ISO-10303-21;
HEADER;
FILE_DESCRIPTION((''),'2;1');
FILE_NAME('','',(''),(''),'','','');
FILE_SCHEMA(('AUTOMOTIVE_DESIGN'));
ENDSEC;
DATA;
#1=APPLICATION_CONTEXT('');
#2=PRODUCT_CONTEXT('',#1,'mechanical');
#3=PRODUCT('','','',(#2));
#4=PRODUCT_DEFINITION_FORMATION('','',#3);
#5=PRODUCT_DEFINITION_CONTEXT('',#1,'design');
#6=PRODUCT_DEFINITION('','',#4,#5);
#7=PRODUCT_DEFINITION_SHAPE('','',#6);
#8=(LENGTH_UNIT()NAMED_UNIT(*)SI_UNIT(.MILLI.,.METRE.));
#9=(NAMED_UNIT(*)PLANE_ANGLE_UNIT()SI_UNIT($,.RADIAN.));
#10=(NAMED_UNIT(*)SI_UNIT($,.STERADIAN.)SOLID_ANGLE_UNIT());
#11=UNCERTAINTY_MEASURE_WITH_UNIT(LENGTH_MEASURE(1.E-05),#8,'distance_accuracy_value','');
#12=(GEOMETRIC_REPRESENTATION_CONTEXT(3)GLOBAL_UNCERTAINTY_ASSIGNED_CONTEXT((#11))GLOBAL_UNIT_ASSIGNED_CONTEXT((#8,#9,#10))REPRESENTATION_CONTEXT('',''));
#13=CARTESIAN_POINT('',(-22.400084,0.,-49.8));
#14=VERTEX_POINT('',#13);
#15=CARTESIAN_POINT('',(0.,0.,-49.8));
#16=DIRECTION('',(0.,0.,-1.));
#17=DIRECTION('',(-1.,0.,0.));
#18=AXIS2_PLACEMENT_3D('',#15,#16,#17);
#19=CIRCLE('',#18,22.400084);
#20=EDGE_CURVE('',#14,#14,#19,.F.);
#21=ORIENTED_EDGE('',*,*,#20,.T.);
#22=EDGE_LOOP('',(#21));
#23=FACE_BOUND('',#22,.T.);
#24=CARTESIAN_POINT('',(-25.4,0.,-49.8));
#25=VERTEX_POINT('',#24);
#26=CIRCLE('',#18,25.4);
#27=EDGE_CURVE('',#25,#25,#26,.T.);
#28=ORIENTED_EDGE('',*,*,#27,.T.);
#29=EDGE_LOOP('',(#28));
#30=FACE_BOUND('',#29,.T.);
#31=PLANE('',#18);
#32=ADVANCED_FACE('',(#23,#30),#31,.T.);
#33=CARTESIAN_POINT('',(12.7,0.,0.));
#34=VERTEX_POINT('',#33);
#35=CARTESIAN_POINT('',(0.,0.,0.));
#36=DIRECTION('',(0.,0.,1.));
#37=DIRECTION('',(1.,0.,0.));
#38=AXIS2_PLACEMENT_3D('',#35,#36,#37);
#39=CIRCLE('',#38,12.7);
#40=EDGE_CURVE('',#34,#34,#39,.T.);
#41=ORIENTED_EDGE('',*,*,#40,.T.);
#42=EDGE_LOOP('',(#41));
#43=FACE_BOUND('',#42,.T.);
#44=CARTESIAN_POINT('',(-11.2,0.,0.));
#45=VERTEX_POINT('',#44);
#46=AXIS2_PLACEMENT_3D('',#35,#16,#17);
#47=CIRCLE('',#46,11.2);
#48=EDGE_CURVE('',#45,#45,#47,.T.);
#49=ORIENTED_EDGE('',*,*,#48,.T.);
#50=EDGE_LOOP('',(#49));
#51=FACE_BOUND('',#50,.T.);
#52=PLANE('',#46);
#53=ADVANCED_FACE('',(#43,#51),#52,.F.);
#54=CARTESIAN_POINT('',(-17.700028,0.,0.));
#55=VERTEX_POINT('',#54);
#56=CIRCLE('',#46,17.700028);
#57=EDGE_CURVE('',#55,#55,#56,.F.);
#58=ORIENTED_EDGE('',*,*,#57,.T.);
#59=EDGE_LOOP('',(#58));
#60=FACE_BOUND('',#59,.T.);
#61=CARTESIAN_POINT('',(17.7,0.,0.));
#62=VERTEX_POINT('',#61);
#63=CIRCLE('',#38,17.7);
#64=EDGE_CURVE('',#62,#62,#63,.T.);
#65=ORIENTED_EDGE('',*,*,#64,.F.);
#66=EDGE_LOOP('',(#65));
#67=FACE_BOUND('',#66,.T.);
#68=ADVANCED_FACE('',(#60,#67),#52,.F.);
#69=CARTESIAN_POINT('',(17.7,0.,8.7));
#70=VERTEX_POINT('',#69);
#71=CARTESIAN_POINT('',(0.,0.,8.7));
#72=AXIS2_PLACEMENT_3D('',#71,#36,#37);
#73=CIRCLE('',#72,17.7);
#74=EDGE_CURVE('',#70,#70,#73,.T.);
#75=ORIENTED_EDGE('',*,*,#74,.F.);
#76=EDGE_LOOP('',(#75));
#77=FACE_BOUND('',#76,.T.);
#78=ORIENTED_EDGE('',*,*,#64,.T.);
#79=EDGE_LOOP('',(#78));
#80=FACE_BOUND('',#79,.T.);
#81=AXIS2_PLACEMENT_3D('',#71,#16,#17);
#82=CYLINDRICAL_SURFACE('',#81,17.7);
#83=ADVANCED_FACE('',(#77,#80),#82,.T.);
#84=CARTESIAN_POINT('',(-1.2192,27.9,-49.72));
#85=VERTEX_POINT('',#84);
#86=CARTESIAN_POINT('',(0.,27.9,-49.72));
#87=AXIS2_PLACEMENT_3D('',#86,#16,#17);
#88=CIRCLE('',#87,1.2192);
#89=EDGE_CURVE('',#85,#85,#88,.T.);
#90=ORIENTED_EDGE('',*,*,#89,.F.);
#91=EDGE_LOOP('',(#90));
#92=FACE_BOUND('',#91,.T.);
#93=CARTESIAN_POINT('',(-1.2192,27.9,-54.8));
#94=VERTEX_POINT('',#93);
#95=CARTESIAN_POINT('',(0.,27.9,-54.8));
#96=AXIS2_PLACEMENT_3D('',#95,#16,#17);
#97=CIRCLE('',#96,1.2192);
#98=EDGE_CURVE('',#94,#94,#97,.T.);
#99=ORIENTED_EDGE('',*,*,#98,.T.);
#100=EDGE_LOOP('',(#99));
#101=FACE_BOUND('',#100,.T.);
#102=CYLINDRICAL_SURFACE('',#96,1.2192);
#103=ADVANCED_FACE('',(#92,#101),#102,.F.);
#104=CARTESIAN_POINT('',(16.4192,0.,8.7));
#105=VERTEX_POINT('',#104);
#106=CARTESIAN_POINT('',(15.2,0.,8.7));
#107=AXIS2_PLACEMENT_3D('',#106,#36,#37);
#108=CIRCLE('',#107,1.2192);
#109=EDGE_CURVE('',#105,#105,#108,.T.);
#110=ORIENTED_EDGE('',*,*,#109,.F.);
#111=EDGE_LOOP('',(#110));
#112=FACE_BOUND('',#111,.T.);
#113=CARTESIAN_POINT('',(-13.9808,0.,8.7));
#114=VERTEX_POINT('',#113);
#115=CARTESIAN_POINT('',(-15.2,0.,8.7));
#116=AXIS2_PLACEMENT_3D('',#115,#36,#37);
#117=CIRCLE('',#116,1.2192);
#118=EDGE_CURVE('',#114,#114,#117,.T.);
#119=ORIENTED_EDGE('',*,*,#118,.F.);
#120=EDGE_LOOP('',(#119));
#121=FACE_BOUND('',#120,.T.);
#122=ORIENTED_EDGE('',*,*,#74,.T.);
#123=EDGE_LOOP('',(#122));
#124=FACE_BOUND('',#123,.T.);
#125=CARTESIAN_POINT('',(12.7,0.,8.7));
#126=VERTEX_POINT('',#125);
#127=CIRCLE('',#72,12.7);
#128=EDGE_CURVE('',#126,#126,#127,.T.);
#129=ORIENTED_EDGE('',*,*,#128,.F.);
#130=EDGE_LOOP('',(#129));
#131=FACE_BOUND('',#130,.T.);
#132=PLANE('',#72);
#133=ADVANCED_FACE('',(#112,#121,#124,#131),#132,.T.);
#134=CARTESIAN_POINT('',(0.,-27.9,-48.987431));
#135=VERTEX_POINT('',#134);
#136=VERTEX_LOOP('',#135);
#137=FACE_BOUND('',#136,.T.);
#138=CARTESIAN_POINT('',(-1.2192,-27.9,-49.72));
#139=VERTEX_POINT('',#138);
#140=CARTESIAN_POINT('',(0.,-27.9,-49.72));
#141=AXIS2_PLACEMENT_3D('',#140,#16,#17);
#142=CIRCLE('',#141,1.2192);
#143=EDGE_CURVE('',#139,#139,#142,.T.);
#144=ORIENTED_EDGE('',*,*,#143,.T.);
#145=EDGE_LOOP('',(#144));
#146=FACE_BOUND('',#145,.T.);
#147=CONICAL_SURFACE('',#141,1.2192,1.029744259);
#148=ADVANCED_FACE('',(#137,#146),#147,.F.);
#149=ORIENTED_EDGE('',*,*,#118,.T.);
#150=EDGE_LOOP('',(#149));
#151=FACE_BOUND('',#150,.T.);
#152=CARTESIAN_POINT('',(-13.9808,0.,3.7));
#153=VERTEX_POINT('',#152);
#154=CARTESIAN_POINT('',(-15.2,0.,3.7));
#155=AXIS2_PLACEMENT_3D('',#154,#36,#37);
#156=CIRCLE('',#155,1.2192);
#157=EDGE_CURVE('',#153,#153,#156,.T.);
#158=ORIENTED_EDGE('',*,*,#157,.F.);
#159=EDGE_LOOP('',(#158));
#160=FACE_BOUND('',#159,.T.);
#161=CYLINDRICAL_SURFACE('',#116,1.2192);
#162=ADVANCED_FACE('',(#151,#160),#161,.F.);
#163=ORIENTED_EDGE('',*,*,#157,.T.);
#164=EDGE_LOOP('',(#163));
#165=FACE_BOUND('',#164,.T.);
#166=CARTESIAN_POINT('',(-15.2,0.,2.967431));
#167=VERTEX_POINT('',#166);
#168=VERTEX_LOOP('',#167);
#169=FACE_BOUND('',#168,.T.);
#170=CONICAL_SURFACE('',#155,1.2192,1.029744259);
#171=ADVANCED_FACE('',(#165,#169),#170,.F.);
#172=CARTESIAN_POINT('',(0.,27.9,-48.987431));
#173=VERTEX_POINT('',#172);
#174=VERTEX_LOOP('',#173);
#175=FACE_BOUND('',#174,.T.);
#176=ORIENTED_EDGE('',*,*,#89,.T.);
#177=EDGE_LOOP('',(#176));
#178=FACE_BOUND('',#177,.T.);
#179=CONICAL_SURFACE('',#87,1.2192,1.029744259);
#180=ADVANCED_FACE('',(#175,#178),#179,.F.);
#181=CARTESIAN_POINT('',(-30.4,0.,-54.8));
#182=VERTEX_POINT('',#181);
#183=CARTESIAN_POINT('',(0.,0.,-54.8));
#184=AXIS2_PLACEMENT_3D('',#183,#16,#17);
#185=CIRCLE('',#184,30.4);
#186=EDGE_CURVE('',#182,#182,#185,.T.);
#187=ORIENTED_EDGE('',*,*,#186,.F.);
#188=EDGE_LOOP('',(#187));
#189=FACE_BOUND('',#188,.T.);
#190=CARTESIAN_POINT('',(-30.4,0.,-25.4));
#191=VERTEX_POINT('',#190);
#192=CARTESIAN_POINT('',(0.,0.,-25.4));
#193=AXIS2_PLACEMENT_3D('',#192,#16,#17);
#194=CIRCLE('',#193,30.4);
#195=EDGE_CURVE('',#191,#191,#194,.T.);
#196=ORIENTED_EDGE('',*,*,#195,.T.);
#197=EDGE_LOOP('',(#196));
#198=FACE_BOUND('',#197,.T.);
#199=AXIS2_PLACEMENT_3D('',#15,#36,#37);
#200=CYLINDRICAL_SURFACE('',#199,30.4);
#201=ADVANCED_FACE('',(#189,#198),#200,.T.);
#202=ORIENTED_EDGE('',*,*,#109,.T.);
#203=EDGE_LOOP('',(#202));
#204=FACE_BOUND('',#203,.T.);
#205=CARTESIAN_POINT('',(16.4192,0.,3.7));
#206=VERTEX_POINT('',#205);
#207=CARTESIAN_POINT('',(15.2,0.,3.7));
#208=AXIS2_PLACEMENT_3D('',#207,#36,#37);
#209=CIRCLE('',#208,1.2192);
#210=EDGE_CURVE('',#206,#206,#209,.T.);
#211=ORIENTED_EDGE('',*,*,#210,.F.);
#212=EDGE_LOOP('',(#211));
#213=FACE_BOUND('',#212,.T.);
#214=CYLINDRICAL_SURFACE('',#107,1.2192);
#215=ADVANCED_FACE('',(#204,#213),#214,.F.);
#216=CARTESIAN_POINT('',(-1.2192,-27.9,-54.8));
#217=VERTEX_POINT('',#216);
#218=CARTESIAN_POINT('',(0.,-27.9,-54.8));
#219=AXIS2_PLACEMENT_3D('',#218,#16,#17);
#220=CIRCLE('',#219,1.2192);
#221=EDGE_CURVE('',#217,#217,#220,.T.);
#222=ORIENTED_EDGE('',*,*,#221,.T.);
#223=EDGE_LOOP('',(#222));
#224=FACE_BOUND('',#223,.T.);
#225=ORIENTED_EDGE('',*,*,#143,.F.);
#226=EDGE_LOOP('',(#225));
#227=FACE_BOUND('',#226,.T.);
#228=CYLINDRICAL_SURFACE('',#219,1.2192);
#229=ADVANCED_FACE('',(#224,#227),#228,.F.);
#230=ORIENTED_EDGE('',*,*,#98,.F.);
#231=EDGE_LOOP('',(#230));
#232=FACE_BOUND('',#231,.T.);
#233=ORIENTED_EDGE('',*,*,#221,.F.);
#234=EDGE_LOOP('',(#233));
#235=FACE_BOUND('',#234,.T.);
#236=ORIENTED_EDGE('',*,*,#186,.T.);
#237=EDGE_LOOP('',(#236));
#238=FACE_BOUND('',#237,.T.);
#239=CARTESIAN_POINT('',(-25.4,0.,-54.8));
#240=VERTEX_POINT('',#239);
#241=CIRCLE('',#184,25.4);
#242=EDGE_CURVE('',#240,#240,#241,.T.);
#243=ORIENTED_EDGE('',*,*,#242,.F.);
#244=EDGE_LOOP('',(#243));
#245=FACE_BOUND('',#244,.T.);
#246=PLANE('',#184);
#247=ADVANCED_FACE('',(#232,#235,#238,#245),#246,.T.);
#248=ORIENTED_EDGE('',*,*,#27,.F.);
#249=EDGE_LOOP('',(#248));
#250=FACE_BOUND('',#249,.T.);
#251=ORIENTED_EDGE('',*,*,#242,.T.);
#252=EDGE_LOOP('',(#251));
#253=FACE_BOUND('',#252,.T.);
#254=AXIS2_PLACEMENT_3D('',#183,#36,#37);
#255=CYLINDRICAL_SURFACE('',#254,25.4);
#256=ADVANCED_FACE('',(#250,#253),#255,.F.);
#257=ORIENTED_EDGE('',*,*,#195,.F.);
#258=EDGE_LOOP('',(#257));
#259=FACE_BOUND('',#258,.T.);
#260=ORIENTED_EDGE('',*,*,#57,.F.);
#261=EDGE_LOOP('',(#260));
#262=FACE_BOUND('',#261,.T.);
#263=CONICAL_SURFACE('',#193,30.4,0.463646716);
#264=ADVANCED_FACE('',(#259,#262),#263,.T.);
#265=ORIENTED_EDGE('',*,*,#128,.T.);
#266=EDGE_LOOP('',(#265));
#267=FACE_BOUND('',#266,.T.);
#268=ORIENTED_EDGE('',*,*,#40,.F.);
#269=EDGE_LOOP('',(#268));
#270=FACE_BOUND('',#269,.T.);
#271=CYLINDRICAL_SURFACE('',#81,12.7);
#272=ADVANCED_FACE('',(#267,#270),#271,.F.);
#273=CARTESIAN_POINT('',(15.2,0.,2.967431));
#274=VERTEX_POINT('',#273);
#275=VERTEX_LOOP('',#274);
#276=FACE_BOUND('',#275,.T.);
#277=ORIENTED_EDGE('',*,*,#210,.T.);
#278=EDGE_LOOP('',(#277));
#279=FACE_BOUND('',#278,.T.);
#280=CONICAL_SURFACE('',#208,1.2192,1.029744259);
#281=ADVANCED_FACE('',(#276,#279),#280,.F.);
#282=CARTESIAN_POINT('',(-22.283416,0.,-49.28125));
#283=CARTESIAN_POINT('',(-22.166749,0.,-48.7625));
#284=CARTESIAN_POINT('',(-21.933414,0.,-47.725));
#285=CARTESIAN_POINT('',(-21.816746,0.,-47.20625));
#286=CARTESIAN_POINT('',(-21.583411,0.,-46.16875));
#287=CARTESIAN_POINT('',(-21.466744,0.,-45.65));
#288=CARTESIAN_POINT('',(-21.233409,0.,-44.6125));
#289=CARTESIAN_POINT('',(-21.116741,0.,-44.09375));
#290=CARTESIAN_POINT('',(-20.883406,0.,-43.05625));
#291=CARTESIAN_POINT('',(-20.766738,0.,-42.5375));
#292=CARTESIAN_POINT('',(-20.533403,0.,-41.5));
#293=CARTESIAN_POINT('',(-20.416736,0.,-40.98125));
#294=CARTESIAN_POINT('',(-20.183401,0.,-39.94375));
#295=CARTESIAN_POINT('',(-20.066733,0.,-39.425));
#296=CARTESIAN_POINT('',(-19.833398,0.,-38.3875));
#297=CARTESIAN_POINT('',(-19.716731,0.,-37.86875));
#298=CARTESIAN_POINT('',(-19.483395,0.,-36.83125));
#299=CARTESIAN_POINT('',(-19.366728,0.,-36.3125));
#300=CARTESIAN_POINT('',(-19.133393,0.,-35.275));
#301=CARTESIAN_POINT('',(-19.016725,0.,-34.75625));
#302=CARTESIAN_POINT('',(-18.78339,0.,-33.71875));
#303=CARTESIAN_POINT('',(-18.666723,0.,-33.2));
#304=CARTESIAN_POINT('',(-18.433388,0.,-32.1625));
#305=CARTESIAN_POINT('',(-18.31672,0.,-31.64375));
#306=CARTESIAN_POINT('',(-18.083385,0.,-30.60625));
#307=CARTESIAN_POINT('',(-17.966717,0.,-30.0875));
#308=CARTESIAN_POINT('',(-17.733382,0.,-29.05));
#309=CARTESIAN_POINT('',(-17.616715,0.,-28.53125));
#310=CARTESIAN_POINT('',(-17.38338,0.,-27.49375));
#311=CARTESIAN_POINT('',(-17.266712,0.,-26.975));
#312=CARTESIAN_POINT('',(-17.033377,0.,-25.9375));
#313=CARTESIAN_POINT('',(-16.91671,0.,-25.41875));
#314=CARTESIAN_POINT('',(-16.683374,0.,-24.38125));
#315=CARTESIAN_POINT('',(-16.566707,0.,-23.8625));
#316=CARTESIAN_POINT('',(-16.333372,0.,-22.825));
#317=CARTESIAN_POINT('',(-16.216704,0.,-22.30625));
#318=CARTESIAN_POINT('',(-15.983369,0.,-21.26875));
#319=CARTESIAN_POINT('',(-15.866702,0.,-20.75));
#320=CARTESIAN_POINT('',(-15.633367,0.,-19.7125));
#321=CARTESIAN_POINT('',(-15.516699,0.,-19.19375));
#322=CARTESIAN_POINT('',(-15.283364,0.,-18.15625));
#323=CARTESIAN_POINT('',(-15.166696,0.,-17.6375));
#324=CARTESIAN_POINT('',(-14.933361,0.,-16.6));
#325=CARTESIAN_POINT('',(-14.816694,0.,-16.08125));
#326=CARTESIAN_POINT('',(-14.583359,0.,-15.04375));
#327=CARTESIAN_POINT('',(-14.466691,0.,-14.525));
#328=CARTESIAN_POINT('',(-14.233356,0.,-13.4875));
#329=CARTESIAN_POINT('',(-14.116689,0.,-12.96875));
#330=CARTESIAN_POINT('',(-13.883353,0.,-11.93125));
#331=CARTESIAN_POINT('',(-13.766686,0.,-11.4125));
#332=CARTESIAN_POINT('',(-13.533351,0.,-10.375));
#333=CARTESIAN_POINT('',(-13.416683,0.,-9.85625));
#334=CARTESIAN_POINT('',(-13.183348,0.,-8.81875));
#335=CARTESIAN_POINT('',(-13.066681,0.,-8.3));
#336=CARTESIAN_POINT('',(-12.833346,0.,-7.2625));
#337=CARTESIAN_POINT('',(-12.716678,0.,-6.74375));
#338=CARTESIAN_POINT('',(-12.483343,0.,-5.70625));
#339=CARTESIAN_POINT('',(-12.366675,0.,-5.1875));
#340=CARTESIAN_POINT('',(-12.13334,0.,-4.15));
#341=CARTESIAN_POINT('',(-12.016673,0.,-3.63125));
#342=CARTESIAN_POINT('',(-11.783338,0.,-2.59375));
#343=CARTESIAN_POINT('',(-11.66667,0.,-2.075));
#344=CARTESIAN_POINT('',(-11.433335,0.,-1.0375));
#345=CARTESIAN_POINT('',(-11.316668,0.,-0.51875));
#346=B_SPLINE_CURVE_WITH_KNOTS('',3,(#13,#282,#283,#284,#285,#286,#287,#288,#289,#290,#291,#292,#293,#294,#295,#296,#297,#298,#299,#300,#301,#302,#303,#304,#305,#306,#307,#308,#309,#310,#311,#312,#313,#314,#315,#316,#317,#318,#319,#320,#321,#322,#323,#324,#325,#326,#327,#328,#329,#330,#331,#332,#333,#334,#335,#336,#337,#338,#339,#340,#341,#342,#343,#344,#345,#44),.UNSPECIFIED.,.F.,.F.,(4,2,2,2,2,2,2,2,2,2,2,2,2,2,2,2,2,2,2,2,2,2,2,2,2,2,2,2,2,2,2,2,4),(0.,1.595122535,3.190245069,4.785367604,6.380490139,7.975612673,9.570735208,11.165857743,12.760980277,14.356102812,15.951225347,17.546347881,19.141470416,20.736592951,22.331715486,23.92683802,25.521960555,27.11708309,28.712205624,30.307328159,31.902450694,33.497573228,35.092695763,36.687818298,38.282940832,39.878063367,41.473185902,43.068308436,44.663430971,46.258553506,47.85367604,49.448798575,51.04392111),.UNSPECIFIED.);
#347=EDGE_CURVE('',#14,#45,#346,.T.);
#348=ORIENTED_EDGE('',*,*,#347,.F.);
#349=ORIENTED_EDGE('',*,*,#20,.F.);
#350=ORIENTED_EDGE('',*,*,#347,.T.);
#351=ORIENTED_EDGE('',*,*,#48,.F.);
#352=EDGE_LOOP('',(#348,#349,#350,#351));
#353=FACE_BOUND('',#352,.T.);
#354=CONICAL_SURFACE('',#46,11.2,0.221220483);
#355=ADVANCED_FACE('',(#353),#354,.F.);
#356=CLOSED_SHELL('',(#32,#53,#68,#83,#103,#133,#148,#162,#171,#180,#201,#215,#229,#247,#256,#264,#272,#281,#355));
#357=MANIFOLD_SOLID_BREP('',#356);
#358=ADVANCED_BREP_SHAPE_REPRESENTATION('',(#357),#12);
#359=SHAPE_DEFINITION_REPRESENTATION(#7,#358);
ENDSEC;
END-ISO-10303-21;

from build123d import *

# Parameters (mm, degrees)
ESQUISSE1_R                     = 17.7
ESQUISSE1_R_2                   = 12.7
BOSS_EXTRU_1_DEPTH              = 8.7
ESQUISSE2_R                     = 30.4
ESQUISSE2_R_2                   = 11.2
BOSS_EXTRU_2_DEPTH              = 49.8
CHANFREIN1_SIZE                 = 25.4
CHANFREIN1_SIZE2                = 12.699971641
CHANFREIN3_SIZE                 = 11.200084029
CHANFREIN3_SIZE_2               = 49.8
F_41_0_096_DIAMETER_HOLE1_D     = 2.4384
F_41_0_096_DIAMETER_HOLE1_DEPTH = 5
F_41_0_096_DIAMETER_HOLE1_TIP   = 0.732569267
SKETCH5_R                       = 30.4
SKETCH5_R_2                     = 25.4
BOSS_EXTRUDE1_DEPTH             = 5


# Read off the part's stored shape, not the designer's step: AdvancedHole1
with BuildPart() as part:
    # Esquisse1 → Boss.-Extru.1 (new body)
    with BuildSketch(Plane.XY):
        Circle(ESQUISSE1_R)
        Circle(ESQUISSE1_R_2, mode=Mode.SUBTRACT)
    extrude(amount=BOSS_EXTRU_1_DEPTH)

    # Esquisse2 → Boss.-Extru.2 (add)
    with BuildSketch(Plane(origin=(0, 0, 0), x_dir=(-1, 0, 0), z_dir=(0, 0, -1))):
        Circle(ESQUISSE2_R)
        Circle(ESQUISSE2_R_2, mode=Mode.SUBTRACT)
    extrude(amount=BOSS_EXTRU_2_DEPTH)

    # Chanfrein1
    chanfrein1_edges = [part.edges().sort_by_distance(p)[0] for p in [
        (30.4, 0, 0),
    ]]
    chanfrein1_side = [part.faces().sort_by_distance(p)[0] for p in [
        (30.4, 0, -24.9),
    ]]
    chamfer(chanfrein1_edges, length=CHANFREIN1_SIZE, length2=CHANFREIN1_SIZE2, reference=chanfrein1_side[0])

    # Chanfrein3
    # the kernel refuses this chamfer: 49.8, 11.200084029 mm, written as the material it takes off along each edge
    with BuildSketch(Plane(origin=(0, 0, -49.8), x_dir=(-1, 0, 0), z_dir=(0, -1, 0))) as chanfrein3_piece_1:
        Polygon((11.2 + CHANFREIN3_SIZE, 0), (11.2, -CHANFREIN3_SIZE_2), (11.2, 0), align=None)
    revolve(axis=Axis((0, 0, -49.8), (0, 0, -1)), mode=Mode.SUBTRACT)

    # #41 (0.096) Diameter Hole1
    with Locations(Plane.XY.offset(8.7)):
        with Locations((-15.2, 0), (15.2, 0)):
            Hole(F_41_0_096_DIAMETER_HOLE1_D / 2, depth=F_41_0_096_DIAMETER_HOLE1_DEPTH)
            with Locations((0, 0, -(F_41_0_096_DIAMETER_HOLE1_DEPTH + F_41_0_096_DIAMETER_HOLE1_TIP / 2))):  # 118° drill point
                Cone(0, F_41_0_096_DIAMETER_HOLE1_D / 2, F_41_0_096_DIAMETER_HOLE1_TIP, mode=Mode.SUBTRACT)

    # Sketch5 → Boss-Extrude1 (add)
    with BuildSketch(Plane(origin=(0, 0, -49.8), x_dir=(-1, 0, 0), z_dir=(0, 0, -1))):
        Circle(SKETCH5_R)
        Circle(SKETCH5_R_2, mode=Mode.SUBTRACT)
    extrude(amount=BOSS_EXTRUDE1_DEPTH)

    # AdvancedHole1 outline → AdvancedHole1 (revolve, cut)
    with BuildSketch(Plane.XZ.offset(-27.9)):
        Polygon((1.2192, -54.8), (1.2192, -49.72), (0, -48.987430733), (0, -54.8), align=None)
    advancedhole1 = revolve(axis=Axis((0, 27.9, 0), (0, 0, 1)), mode=Mode.SUBTRACT)

    # Mirror1: AdvancedHole1 across plane
    add(advancedhole1.mirror(Plane.ZX), mode=Mode.SUBTRACT)


solid = part.part
